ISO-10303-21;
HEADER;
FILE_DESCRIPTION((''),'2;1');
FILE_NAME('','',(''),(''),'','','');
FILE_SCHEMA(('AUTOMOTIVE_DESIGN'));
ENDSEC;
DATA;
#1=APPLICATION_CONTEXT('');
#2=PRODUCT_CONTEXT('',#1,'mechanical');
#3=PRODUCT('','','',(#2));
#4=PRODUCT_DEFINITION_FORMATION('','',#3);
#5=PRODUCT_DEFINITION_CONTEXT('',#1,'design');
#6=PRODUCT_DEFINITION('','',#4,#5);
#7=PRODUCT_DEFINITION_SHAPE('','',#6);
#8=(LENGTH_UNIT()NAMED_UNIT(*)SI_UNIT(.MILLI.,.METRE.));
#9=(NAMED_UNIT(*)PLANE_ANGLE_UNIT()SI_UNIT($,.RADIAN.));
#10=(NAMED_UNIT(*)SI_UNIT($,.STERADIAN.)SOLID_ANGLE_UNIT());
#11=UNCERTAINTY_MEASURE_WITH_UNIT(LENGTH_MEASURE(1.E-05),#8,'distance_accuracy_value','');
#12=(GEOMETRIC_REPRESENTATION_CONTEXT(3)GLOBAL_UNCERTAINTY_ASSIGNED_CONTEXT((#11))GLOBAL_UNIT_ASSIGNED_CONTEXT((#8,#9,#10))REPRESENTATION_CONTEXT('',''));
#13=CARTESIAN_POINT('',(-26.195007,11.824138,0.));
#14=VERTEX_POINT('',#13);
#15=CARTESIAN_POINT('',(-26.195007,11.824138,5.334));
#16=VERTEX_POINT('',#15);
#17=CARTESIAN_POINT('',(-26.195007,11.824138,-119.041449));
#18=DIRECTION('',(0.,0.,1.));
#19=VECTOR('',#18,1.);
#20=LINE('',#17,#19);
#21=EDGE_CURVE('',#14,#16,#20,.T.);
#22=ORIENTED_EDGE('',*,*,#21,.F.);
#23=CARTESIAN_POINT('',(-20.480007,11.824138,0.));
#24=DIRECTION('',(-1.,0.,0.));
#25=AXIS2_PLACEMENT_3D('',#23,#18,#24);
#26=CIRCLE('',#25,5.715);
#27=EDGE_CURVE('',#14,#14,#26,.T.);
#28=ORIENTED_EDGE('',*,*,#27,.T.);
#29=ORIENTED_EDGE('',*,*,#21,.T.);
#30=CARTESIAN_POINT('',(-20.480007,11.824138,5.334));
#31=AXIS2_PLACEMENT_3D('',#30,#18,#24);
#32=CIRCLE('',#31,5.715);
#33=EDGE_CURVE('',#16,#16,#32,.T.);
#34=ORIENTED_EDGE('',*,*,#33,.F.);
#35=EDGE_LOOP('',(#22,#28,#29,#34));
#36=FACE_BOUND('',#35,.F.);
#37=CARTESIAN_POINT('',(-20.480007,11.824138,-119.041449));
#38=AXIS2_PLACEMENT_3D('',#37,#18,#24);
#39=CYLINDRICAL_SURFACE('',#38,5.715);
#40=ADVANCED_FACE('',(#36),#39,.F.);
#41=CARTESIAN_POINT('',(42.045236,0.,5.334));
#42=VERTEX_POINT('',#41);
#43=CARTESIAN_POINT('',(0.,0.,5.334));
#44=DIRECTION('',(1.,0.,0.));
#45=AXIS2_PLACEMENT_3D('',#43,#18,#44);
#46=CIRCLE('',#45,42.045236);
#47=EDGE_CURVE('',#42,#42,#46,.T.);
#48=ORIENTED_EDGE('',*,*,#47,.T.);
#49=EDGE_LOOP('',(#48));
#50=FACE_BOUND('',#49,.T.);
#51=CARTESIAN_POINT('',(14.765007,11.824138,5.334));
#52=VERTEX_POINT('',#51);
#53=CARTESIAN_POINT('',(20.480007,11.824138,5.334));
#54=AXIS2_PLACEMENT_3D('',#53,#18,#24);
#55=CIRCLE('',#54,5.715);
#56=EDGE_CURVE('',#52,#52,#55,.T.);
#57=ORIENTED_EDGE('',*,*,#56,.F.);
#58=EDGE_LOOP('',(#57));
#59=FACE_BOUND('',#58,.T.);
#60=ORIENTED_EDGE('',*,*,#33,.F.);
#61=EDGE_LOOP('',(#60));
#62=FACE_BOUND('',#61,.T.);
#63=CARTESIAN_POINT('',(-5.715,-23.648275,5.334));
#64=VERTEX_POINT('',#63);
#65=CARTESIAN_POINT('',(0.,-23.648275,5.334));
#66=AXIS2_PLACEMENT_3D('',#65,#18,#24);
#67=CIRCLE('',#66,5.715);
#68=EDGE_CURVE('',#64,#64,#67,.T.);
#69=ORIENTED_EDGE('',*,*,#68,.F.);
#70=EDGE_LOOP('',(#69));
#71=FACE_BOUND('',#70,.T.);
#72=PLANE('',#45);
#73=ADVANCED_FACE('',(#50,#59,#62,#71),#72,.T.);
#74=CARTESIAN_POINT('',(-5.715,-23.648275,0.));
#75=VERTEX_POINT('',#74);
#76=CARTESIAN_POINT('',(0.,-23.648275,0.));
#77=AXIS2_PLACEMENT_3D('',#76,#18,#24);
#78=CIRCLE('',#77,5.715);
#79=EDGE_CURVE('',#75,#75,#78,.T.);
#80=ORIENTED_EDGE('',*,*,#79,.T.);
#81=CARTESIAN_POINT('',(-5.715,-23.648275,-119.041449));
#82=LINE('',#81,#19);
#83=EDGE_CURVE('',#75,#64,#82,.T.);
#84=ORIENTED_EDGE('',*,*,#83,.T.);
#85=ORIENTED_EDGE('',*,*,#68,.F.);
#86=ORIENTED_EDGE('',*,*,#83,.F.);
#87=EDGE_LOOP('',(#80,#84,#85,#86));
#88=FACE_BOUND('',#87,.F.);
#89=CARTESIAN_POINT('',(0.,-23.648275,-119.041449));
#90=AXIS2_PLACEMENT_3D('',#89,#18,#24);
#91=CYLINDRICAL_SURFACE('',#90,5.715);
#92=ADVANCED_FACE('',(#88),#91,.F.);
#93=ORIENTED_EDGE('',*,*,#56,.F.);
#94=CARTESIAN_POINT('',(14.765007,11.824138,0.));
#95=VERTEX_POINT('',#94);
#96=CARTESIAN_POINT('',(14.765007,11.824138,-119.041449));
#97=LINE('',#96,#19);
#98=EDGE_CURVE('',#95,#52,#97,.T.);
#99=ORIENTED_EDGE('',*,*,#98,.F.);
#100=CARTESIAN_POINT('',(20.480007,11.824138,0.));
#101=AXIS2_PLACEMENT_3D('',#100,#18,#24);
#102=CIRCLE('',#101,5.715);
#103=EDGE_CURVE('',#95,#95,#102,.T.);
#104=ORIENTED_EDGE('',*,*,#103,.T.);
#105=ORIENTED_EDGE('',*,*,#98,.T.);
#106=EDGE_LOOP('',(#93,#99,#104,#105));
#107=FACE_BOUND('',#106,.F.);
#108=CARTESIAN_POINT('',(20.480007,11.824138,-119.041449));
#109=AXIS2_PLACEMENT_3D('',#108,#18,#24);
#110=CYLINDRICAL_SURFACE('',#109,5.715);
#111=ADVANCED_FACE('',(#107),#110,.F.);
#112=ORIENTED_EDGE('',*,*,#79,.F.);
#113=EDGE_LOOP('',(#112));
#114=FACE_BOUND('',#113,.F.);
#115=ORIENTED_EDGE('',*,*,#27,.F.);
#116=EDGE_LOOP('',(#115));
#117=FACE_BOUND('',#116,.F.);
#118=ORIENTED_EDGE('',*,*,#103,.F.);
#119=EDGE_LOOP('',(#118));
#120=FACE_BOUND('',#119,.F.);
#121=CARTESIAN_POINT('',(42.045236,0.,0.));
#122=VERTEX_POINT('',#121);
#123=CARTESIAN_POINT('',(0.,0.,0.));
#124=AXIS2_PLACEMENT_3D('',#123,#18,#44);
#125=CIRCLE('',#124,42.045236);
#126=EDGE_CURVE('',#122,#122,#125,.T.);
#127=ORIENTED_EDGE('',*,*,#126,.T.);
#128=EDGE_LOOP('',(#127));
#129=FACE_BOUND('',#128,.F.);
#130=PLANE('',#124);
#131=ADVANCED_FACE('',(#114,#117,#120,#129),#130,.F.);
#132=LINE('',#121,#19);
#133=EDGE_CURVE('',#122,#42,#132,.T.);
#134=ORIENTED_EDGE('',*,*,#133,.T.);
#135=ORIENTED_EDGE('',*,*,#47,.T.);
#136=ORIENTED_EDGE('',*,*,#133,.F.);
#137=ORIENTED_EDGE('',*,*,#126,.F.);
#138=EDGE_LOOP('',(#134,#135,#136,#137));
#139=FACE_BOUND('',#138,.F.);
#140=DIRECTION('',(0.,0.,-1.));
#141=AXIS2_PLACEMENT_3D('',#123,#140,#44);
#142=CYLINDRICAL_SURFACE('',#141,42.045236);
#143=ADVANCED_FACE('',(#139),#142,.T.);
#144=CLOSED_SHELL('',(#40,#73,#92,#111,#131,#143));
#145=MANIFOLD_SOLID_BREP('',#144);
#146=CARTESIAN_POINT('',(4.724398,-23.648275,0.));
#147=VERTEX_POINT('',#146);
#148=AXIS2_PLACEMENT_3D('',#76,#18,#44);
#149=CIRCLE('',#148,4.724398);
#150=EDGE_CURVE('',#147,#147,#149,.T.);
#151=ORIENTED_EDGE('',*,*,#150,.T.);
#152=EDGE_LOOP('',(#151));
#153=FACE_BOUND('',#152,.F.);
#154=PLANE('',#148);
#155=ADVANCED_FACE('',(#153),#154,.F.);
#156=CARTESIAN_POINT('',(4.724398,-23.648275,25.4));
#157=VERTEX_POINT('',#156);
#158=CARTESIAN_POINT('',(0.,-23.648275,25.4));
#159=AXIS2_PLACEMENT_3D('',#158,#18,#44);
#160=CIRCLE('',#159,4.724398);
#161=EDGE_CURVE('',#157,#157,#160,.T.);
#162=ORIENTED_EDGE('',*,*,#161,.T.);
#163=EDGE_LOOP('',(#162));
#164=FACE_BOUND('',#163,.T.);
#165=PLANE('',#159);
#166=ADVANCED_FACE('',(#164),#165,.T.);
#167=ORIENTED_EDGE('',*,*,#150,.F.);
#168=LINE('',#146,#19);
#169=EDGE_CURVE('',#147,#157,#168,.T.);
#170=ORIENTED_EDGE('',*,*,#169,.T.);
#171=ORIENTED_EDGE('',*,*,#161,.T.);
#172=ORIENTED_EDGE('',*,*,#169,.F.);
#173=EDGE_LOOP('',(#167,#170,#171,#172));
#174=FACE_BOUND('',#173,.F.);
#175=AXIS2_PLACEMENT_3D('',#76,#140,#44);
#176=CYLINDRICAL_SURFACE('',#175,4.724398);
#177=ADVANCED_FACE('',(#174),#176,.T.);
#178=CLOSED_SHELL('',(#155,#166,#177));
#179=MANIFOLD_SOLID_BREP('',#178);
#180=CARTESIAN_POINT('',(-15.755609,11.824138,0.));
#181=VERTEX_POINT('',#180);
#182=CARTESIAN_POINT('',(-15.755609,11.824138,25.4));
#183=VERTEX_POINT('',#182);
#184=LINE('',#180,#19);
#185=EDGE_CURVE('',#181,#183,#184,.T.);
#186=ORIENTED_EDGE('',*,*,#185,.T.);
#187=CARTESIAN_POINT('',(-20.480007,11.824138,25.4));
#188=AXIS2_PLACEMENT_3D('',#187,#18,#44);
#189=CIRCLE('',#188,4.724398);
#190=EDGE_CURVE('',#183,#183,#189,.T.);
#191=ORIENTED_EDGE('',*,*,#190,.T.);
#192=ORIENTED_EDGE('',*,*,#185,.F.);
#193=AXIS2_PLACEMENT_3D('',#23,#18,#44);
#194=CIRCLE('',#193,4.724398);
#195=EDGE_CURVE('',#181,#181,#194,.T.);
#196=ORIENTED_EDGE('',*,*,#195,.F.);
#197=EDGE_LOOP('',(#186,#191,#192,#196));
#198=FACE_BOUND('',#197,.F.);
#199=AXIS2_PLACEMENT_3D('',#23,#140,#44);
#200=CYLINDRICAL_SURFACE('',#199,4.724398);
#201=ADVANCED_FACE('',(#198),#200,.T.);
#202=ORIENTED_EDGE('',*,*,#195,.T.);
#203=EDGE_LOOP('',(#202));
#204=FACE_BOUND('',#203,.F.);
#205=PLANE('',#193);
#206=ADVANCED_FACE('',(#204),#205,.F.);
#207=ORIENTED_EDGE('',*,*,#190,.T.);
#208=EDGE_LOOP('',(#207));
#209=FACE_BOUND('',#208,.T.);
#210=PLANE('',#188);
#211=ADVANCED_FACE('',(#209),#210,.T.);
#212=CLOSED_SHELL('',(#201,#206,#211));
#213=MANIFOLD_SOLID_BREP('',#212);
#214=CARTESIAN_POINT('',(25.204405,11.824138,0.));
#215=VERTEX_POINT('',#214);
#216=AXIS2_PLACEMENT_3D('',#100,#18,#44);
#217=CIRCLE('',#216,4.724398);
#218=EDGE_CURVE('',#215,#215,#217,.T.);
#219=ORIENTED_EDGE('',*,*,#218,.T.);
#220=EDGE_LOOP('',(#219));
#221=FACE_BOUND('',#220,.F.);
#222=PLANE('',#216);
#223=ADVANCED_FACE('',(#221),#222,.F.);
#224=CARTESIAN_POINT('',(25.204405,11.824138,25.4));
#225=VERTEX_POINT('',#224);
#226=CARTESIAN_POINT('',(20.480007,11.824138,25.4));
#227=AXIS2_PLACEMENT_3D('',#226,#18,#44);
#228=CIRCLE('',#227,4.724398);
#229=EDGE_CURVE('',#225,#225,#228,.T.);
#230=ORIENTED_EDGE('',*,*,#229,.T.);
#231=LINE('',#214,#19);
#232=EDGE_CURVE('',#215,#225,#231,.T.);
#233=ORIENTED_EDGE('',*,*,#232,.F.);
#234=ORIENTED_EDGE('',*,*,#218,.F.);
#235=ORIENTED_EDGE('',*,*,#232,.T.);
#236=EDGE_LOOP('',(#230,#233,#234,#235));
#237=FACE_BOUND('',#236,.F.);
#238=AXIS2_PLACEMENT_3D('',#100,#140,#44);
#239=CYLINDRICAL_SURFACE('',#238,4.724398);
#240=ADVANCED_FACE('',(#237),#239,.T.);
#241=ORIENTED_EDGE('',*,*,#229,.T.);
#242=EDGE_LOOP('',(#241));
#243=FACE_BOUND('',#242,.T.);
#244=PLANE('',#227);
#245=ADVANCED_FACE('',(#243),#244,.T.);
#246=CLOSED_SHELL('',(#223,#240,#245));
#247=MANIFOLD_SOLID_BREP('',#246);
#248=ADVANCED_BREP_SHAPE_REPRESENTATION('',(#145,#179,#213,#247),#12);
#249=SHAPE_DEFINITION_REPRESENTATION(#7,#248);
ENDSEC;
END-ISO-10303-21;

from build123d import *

# Parameters (mm, degrees)
F0_R     = 42.0452361361
F1_DEPTH = 5.334
F3_D     = 11.43
F2_R     = 4.7243980019
F4_DEPTH = 25.4


with BuildPart() as f1:
    # F0 (on Top) → F1 (new body)
    with BuildSketch(Plane.XY):
        Circle(F0_R)
    extrude(amount=F1_DEPTH)

    # F3 (through all)
    with Locations(Plane(origin=(0, 0, 0), x_dir=(1, 0, 0), z_dir=(0, 0, -1))):
        with Locations((-20.4800069598, -11.8241375312), (20.4800069598, -11.8241375312), (0, 23.6482750624)):
            Hole(F3_D / 2)


with BuildPart() as f4:
    # F2 (on Top) → F4 (new body)
    with BuildSketch(Plane.XY):
        with Locations((-20.4800069598, 11.8241375312)):
            Circle(F2_R)
    extrude(amount=F4_DEPTH)


with BuildPart() as f4b:
    # F2 (on Top) → F4, piece 2 (new body)
    with BuildSketch(Plane.XY):
        with Locations((20.4800069598, 11.8241375312)):
            Circle(F2_R)
    extrude(amount=F4_DEPTH)


with BuildPart() as f4c:
    # F2 (on Top) → F4, piece 3 (new body)
    with BuildSketch(Plane.XY):
        with Locations((0, -23.6482750624)):
            Circle(F2_R)
    extrude(amount=F4_DEPTH)


solid = Compound([f1.part, f4.part, f4b.part, f4c.part])
